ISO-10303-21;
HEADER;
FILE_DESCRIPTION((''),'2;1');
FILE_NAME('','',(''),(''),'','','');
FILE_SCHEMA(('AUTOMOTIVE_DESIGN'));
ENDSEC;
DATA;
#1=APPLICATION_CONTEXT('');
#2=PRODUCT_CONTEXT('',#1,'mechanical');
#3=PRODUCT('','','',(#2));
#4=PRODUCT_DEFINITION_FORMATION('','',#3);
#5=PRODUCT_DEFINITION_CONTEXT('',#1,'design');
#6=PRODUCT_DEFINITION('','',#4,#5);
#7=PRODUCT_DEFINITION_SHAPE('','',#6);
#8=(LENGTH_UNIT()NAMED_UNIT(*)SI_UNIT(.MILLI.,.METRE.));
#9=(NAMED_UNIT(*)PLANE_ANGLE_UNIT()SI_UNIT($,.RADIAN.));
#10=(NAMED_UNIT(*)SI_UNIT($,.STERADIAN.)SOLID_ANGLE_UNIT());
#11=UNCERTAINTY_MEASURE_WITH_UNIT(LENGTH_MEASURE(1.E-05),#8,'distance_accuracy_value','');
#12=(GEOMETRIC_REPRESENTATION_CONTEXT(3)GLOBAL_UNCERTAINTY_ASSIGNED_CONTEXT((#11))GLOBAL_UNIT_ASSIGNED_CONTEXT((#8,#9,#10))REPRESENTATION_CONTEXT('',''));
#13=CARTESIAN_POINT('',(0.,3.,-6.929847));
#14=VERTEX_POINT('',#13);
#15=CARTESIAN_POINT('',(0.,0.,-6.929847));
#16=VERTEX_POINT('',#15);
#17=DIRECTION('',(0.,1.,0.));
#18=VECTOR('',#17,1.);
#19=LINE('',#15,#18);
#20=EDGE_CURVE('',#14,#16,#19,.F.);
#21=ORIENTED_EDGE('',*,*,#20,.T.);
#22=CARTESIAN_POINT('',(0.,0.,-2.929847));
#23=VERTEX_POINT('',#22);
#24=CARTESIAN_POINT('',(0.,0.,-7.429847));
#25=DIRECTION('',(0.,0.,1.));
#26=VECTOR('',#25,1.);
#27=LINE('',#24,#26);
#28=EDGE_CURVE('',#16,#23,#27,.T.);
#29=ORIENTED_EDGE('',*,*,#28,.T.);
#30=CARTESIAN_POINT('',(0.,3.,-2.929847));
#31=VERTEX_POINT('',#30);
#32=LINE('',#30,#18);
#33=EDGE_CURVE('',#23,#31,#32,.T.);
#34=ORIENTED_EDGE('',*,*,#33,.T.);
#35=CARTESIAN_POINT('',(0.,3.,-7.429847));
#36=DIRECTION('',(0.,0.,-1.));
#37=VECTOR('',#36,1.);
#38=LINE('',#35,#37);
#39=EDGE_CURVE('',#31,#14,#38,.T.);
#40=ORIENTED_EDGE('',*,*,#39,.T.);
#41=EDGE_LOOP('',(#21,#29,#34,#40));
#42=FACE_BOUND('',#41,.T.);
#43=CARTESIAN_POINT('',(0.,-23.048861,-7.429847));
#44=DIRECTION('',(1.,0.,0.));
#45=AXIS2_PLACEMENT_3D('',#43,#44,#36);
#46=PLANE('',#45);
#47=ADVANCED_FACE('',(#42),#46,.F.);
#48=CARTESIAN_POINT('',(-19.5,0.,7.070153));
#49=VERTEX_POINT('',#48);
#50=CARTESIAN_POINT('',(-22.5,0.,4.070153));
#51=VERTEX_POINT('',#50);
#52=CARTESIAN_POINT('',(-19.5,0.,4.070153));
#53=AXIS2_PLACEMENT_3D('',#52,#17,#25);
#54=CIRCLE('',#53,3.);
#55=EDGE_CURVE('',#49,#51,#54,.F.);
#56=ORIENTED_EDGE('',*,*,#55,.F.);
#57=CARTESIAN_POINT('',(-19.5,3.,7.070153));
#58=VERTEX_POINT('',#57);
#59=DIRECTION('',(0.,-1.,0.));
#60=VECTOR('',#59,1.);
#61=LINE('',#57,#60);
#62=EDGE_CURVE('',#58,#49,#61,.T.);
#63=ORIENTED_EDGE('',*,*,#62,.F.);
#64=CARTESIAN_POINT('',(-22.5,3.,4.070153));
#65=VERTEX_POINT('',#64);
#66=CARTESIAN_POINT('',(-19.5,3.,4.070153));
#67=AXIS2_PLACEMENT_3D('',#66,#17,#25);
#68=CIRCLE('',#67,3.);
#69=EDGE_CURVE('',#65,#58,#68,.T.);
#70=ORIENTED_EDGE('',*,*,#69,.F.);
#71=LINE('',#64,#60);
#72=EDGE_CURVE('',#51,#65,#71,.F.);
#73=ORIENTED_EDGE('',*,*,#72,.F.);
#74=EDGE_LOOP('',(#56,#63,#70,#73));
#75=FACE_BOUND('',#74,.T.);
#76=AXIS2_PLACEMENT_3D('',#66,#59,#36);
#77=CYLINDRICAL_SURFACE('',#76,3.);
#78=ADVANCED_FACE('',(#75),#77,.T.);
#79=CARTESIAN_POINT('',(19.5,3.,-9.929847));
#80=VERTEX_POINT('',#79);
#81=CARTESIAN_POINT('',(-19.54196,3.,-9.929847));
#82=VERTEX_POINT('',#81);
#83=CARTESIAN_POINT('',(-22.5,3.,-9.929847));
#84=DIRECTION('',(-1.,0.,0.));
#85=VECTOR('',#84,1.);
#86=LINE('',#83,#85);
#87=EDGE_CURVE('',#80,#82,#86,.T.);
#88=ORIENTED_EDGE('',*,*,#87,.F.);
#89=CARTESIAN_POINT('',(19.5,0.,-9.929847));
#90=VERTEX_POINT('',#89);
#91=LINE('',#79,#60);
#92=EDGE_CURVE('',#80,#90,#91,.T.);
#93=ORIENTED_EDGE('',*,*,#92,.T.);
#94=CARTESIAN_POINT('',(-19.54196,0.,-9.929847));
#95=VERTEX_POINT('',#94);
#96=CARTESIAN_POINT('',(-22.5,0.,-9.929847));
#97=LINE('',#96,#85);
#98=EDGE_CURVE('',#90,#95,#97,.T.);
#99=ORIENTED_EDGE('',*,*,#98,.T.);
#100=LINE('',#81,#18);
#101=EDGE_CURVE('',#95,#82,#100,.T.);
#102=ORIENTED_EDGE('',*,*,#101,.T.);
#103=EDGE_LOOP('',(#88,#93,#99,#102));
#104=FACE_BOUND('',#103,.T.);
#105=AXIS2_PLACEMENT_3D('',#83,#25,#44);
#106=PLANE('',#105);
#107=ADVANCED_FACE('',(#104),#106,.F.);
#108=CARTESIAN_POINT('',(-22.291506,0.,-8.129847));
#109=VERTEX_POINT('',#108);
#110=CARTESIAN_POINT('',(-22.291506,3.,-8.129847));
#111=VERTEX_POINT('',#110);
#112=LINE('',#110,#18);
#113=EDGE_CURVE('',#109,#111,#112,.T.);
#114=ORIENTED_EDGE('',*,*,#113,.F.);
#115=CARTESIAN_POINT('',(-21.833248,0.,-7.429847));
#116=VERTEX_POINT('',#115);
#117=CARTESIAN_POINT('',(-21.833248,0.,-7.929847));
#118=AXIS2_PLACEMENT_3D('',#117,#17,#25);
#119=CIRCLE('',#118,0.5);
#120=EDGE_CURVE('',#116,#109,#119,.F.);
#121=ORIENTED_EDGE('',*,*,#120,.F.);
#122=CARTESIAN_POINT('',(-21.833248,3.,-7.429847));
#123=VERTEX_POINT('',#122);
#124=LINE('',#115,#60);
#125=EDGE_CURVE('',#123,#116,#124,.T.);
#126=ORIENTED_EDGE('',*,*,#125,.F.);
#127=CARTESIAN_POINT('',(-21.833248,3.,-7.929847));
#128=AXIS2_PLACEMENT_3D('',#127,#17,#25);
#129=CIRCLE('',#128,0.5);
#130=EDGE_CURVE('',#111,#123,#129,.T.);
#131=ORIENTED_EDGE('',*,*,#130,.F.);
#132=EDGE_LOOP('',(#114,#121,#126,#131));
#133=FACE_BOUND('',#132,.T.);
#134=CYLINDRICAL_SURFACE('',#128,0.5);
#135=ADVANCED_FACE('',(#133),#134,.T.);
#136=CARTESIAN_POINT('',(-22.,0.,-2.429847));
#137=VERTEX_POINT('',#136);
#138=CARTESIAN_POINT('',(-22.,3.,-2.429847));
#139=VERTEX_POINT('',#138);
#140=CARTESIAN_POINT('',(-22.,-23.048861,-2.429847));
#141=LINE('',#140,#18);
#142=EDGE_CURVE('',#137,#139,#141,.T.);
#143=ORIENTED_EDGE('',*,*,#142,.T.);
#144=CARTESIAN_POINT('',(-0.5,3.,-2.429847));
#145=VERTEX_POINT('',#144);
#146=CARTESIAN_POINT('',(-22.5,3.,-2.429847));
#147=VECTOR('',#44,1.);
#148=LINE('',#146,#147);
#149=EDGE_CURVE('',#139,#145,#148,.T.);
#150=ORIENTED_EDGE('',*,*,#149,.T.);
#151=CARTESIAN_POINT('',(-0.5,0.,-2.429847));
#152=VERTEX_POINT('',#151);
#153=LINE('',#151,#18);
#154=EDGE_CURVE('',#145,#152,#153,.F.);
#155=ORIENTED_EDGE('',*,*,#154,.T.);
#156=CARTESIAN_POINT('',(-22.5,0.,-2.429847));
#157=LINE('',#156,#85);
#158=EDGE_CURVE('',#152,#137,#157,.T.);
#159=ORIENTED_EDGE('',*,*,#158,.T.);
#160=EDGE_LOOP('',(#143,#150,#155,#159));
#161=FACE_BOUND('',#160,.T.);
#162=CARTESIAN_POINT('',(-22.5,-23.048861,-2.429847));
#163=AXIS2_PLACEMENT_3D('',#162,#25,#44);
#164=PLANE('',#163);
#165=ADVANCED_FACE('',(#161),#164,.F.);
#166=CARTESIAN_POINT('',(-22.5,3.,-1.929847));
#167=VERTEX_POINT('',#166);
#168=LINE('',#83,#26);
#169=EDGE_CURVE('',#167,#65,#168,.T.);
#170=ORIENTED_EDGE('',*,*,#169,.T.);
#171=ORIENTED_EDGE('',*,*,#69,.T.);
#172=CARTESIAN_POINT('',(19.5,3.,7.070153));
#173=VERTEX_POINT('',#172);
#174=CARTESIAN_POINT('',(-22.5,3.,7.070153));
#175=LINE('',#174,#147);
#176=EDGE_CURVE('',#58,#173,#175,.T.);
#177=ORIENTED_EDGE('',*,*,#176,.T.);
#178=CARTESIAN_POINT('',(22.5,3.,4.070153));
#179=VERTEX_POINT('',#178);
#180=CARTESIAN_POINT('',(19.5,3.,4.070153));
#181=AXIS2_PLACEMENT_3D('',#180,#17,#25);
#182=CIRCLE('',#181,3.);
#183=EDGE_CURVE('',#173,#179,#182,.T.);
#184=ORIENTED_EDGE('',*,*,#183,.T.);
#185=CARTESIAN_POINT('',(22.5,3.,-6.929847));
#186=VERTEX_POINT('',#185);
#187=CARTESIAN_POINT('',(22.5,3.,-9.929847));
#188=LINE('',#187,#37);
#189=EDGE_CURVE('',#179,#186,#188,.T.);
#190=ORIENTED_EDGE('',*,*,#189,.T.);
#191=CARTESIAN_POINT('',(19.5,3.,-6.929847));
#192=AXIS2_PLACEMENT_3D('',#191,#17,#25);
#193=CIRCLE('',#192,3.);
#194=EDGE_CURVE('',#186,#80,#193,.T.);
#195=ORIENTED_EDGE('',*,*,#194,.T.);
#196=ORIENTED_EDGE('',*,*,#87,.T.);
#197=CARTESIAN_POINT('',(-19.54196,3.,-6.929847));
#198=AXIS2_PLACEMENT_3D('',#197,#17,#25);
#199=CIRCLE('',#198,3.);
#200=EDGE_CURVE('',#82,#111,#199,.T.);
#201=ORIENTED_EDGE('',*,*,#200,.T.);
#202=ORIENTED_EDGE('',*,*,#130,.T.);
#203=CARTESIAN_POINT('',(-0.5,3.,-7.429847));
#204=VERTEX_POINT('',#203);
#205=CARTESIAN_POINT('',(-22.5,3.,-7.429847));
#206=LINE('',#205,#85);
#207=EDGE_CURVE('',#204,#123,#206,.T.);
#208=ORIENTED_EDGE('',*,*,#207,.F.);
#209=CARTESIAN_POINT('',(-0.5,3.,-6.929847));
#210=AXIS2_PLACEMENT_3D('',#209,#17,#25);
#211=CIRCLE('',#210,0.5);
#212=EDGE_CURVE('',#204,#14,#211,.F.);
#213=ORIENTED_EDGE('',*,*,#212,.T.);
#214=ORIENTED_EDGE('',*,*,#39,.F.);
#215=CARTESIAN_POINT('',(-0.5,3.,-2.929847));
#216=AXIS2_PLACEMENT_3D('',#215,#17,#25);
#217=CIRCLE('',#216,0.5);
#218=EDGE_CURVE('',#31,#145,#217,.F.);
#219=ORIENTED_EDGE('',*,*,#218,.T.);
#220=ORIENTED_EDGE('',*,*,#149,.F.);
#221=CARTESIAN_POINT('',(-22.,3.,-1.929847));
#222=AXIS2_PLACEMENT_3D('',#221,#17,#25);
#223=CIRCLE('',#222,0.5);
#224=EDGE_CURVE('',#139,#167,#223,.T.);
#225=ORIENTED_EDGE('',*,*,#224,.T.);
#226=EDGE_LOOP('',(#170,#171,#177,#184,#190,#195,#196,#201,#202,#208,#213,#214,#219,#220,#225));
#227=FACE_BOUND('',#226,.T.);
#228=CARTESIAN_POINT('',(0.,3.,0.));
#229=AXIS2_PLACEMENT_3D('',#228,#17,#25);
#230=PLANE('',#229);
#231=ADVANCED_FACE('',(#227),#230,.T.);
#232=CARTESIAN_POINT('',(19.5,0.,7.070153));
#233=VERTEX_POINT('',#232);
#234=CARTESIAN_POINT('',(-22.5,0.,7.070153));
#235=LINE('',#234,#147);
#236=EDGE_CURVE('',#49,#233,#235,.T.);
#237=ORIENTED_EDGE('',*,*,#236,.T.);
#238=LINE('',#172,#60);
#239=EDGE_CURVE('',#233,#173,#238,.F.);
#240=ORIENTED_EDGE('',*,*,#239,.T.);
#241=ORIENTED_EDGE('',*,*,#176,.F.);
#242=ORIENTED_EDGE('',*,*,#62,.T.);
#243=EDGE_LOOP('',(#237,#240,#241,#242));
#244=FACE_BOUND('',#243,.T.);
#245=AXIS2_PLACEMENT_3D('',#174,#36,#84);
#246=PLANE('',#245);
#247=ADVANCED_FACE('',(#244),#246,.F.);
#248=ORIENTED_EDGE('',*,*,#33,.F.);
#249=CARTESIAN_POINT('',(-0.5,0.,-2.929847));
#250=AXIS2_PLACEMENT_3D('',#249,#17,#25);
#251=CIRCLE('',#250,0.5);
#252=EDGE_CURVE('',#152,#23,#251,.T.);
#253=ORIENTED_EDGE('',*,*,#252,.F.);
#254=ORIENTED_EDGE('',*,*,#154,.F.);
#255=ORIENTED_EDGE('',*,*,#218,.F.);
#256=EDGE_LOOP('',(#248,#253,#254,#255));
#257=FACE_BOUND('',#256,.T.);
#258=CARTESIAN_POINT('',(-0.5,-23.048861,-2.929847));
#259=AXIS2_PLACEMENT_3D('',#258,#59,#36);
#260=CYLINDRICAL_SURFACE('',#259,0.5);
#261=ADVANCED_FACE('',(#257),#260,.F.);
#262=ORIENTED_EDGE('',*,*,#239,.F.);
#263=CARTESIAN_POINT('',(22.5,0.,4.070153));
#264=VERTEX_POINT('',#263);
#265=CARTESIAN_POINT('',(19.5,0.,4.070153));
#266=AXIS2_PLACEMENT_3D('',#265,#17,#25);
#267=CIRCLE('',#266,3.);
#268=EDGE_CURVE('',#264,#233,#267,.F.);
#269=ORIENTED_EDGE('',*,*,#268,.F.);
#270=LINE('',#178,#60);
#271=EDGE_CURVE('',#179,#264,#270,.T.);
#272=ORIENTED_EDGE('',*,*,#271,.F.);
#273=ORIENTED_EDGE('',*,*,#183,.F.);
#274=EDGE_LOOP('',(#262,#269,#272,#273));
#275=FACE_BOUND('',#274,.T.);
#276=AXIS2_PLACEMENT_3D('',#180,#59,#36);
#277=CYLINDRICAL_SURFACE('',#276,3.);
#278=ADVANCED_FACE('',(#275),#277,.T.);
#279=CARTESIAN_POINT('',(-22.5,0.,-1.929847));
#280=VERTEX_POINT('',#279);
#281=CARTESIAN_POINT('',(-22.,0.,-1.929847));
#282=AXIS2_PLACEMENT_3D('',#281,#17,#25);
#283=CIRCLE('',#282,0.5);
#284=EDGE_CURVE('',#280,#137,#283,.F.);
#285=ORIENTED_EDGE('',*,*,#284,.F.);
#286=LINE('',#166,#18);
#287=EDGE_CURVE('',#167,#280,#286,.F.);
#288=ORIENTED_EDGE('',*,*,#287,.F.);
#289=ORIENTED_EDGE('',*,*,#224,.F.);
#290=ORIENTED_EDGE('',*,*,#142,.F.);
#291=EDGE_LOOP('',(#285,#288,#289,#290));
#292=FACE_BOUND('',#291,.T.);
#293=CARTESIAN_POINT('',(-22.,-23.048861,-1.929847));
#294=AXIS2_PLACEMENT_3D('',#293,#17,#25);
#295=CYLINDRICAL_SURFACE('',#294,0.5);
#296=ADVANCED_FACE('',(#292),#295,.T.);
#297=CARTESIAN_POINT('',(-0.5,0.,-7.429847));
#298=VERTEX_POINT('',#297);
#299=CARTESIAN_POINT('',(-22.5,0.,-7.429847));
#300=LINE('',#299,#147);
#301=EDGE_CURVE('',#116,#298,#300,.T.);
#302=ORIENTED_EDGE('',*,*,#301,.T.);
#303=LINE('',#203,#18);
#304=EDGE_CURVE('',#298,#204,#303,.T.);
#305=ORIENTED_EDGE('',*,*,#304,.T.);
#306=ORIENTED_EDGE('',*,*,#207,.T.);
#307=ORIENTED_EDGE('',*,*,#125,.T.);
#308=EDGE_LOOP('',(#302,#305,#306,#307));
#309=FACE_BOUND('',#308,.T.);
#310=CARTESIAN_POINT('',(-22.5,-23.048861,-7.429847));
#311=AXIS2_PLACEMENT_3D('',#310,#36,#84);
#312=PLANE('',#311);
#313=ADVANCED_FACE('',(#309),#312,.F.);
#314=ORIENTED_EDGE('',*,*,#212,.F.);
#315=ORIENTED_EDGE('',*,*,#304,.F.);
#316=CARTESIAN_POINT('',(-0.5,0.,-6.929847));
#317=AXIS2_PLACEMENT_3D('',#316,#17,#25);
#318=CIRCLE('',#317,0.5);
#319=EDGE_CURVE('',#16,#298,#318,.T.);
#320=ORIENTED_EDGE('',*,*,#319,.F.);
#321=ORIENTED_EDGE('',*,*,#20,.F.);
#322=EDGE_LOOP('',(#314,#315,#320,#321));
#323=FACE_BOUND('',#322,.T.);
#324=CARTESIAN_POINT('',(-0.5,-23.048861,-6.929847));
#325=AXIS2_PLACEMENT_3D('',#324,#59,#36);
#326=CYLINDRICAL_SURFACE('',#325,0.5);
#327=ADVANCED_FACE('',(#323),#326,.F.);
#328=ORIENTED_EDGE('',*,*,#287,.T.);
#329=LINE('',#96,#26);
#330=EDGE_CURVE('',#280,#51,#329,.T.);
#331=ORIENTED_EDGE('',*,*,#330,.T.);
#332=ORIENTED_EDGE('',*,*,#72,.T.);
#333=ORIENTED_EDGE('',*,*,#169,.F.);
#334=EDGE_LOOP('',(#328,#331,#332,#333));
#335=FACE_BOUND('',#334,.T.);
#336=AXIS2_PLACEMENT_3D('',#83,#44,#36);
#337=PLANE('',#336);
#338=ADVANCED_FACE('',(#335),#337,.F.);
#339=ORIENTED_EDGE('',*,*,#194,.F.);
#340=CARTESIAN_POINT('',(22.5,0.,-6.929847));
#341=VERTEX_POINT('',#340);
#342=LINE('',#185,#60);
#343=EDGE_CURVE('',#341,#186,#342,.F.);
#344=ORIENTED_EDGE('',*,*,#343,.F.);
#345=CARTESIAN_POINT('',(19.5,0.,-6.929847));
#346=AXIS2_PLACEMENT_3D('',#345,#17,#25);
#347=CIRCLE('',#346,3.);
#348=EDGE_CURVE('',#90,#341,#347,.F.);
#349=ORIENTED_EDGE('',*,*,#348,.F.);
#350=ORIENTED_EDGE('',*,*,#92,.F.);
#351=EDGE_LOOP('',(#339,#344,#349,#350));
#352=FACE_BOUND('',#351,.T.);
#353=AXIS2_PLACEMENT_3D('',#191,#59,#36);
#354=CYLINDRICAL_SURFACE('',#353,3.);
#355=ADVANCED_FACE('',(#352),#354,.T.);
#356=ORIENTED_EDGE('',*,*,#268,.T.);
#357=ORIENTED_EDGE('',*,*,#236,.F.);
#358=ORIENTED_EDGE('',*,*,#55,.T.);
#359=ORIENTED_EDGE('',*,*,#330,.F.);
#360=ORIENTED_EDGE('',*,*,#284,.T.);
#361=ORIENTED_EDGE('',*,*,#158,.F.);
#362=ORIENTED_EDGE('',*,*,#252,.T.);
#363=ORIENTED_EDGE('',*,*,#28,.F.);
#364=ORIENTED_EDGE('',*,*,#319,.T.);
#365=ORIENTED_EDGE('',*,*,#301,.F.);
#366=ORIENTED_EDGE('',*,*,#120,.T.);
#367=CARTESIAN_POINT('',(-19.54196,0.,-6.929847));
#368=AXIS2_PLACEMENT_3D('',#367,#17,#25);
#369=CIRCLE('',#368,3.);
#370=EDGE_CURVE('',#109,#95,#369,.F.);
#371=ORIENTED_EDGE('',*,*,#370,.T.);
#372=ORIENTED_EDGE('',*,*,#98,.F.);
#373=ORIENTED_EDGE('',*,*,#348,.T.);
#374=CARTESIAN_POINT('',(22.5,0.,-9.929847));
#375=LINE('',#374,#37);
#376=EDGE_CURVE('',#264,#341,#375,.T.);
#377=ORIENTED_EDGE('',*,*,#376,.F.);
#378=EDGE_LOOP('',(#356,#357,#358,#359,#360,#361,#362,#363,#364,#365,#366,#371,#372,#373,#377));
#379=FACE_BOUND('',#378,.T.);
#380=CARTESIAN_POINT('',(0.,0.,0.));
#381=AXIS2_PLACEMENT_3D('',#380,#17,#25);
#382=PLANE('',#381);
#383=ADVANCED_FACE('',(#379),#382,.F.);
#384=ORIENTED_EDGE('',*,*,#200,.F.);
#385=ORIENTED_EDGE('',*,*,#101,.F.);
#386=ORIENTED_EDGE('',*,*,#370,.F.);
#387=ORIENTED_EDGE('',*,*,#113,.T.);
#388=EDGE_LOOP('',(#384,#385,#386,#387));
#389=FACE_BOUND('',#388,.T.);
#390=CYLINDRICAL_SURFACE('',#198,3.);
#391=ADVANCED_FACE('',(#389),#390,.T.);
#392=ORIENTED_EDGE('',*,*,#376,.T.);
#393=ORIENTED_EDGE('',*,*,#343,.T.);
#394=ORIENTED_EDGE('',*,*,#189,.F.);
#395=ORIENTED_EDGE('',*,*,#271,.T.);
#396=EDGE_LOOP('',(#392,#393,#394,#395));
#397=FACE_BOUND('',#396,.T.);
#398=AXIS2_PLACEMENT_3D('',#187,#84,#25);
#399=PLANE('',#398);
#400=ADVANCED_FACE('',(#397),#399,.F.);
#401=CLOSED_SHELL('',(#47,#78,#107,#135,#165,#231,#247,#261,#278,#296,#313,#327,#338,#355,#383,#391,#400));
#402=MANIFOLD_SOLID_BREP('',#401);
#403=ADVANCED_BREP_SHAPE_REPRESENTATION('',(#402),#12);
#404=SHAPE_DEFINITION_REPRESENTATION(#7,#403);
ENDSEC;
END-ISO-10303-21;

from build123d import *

# Parameters (mm, degrees)
CROQUIS1_W              = 45
CROQUIS1_H              = 17
SALIENTE_EXTRUIR1_DEPTH = 3
CROQUIS2_W              = 22.5
CROQUIS2_H              = 5
CORTAR_EXTRUIR1_DEPTH   = 3
REDONDEO1_R             = 3
REDONDEO4_R             = 0.5


with BuildPart() as part:
    # Croquis1 → Saliente-Extruir1 (new body)
    with BuildSketch(Plane(origin=(0, 0, 0), x_dir=(1, 0, 0), z_dir=(0, 1, 0))):
        with Locations((0, 1.429847209)):
            Rectangle(CROQUIS1_W, CROQUIS1_H)
    extrude(amount=SALIENTE_EXTRUIR1_DEPTH)

    # Croquis2 → Cortar-Extruir1 (cut)
    with BuildSketch(Plane(origin=(0, 3, 0), x_dir=(1, 0, 0), z_dir=(0, 1, 0))):
        with Locations((-11.25, 4.929847209)):
            Rectangle(CROQUIS2_W, CROQUIS2_H)
    extrude(amount=-CORTAR_EXTRUIR1_DEPTH, mode=Mode.SUBTRACT)

    # Redondeo1
    # the kernel refuses this fillet: 3 mm, written as the material it takes off along each edge
    with BuildSketch(Plane(origin=(-22.5, -7.395099729, -9.929847209), x_dir=(1, 0, 0), z_dir=(0, 1, 0))) as redondeo1_piece_1:
        with BuildLine():
            CenterArc((2.958039892, -3), REDONDEO1_R, 90, 80.405931773)
            Line((0, -2.5), (-0.059160798, -2.49))
            ThreePointArc((-0.059160798, -2.49), (-0.06, -1.25), (-0.06, 0))
            Line((-0.06, 0), (0, 0.06))
            Line((0, 0.06), (2.958039892, 0.06))
            Line((2.958039892, 0.06), (2.958039892, 0))
        make_face()
    extrude(amount=17.790199458, mode=Mode.SUBTRACT)
    with BuildSketch(Plane(origin=(22.5, -7.5, -9.929847209), x_dir=(-1, 0, 0), z_dir=(0, 1, 0)), Plane(origin=(22.5, -7.5, 7.070152791), x_dir=(0, 0, -1), z_dir=(0, 1, 0)), Plane(origin=(-22.5, -7.5, 7.070152791), x_dir=(1, 0, 0), z_dir=(0, 1, 0))) as redondeo1_piece_2:
        with BuildLine():
            CenterArc((REDONDEO1_R, REDONDEO1_R), REDONDEO1_R, 180, 90)
            Line((0, REDONDEO1_R), (-REDONDEO1_R * 0.02, REDONDEO1_R))
            Line((-REDONDEO1_R * 0.02, REDONDEO1_R), (-REDONDEO1_R * 0.02, -REDONDEO1_R * 0.02))
            Line((-REDONDEO1_R * 0.02, -REDONDEO1_R * 0.02), (REDONDEO1_R, -REDONDEO1_R * 0.02))
            Line((REDONDEO1_R, -REDONDEO1_R * 0.02), (REDONDEO1_R, 0))
        make_face()
    extrude(amount=18, mode=Mode.SUBTRACT)

    # Redondeo4
    redondeo4_edges = [part.edges().sort_by_distance(p)[0] for p in [
        (-22.5, 1.5, -2.429847209),
        (-22.5, 1.5, -7.429847209),
        (0, 1.5, -7.429847209),
        (0, 1.5, -2.429847209),
    ]]
    fillet(redondeo4_edges, radius=REDONDEO4_R)


solid = part.part
